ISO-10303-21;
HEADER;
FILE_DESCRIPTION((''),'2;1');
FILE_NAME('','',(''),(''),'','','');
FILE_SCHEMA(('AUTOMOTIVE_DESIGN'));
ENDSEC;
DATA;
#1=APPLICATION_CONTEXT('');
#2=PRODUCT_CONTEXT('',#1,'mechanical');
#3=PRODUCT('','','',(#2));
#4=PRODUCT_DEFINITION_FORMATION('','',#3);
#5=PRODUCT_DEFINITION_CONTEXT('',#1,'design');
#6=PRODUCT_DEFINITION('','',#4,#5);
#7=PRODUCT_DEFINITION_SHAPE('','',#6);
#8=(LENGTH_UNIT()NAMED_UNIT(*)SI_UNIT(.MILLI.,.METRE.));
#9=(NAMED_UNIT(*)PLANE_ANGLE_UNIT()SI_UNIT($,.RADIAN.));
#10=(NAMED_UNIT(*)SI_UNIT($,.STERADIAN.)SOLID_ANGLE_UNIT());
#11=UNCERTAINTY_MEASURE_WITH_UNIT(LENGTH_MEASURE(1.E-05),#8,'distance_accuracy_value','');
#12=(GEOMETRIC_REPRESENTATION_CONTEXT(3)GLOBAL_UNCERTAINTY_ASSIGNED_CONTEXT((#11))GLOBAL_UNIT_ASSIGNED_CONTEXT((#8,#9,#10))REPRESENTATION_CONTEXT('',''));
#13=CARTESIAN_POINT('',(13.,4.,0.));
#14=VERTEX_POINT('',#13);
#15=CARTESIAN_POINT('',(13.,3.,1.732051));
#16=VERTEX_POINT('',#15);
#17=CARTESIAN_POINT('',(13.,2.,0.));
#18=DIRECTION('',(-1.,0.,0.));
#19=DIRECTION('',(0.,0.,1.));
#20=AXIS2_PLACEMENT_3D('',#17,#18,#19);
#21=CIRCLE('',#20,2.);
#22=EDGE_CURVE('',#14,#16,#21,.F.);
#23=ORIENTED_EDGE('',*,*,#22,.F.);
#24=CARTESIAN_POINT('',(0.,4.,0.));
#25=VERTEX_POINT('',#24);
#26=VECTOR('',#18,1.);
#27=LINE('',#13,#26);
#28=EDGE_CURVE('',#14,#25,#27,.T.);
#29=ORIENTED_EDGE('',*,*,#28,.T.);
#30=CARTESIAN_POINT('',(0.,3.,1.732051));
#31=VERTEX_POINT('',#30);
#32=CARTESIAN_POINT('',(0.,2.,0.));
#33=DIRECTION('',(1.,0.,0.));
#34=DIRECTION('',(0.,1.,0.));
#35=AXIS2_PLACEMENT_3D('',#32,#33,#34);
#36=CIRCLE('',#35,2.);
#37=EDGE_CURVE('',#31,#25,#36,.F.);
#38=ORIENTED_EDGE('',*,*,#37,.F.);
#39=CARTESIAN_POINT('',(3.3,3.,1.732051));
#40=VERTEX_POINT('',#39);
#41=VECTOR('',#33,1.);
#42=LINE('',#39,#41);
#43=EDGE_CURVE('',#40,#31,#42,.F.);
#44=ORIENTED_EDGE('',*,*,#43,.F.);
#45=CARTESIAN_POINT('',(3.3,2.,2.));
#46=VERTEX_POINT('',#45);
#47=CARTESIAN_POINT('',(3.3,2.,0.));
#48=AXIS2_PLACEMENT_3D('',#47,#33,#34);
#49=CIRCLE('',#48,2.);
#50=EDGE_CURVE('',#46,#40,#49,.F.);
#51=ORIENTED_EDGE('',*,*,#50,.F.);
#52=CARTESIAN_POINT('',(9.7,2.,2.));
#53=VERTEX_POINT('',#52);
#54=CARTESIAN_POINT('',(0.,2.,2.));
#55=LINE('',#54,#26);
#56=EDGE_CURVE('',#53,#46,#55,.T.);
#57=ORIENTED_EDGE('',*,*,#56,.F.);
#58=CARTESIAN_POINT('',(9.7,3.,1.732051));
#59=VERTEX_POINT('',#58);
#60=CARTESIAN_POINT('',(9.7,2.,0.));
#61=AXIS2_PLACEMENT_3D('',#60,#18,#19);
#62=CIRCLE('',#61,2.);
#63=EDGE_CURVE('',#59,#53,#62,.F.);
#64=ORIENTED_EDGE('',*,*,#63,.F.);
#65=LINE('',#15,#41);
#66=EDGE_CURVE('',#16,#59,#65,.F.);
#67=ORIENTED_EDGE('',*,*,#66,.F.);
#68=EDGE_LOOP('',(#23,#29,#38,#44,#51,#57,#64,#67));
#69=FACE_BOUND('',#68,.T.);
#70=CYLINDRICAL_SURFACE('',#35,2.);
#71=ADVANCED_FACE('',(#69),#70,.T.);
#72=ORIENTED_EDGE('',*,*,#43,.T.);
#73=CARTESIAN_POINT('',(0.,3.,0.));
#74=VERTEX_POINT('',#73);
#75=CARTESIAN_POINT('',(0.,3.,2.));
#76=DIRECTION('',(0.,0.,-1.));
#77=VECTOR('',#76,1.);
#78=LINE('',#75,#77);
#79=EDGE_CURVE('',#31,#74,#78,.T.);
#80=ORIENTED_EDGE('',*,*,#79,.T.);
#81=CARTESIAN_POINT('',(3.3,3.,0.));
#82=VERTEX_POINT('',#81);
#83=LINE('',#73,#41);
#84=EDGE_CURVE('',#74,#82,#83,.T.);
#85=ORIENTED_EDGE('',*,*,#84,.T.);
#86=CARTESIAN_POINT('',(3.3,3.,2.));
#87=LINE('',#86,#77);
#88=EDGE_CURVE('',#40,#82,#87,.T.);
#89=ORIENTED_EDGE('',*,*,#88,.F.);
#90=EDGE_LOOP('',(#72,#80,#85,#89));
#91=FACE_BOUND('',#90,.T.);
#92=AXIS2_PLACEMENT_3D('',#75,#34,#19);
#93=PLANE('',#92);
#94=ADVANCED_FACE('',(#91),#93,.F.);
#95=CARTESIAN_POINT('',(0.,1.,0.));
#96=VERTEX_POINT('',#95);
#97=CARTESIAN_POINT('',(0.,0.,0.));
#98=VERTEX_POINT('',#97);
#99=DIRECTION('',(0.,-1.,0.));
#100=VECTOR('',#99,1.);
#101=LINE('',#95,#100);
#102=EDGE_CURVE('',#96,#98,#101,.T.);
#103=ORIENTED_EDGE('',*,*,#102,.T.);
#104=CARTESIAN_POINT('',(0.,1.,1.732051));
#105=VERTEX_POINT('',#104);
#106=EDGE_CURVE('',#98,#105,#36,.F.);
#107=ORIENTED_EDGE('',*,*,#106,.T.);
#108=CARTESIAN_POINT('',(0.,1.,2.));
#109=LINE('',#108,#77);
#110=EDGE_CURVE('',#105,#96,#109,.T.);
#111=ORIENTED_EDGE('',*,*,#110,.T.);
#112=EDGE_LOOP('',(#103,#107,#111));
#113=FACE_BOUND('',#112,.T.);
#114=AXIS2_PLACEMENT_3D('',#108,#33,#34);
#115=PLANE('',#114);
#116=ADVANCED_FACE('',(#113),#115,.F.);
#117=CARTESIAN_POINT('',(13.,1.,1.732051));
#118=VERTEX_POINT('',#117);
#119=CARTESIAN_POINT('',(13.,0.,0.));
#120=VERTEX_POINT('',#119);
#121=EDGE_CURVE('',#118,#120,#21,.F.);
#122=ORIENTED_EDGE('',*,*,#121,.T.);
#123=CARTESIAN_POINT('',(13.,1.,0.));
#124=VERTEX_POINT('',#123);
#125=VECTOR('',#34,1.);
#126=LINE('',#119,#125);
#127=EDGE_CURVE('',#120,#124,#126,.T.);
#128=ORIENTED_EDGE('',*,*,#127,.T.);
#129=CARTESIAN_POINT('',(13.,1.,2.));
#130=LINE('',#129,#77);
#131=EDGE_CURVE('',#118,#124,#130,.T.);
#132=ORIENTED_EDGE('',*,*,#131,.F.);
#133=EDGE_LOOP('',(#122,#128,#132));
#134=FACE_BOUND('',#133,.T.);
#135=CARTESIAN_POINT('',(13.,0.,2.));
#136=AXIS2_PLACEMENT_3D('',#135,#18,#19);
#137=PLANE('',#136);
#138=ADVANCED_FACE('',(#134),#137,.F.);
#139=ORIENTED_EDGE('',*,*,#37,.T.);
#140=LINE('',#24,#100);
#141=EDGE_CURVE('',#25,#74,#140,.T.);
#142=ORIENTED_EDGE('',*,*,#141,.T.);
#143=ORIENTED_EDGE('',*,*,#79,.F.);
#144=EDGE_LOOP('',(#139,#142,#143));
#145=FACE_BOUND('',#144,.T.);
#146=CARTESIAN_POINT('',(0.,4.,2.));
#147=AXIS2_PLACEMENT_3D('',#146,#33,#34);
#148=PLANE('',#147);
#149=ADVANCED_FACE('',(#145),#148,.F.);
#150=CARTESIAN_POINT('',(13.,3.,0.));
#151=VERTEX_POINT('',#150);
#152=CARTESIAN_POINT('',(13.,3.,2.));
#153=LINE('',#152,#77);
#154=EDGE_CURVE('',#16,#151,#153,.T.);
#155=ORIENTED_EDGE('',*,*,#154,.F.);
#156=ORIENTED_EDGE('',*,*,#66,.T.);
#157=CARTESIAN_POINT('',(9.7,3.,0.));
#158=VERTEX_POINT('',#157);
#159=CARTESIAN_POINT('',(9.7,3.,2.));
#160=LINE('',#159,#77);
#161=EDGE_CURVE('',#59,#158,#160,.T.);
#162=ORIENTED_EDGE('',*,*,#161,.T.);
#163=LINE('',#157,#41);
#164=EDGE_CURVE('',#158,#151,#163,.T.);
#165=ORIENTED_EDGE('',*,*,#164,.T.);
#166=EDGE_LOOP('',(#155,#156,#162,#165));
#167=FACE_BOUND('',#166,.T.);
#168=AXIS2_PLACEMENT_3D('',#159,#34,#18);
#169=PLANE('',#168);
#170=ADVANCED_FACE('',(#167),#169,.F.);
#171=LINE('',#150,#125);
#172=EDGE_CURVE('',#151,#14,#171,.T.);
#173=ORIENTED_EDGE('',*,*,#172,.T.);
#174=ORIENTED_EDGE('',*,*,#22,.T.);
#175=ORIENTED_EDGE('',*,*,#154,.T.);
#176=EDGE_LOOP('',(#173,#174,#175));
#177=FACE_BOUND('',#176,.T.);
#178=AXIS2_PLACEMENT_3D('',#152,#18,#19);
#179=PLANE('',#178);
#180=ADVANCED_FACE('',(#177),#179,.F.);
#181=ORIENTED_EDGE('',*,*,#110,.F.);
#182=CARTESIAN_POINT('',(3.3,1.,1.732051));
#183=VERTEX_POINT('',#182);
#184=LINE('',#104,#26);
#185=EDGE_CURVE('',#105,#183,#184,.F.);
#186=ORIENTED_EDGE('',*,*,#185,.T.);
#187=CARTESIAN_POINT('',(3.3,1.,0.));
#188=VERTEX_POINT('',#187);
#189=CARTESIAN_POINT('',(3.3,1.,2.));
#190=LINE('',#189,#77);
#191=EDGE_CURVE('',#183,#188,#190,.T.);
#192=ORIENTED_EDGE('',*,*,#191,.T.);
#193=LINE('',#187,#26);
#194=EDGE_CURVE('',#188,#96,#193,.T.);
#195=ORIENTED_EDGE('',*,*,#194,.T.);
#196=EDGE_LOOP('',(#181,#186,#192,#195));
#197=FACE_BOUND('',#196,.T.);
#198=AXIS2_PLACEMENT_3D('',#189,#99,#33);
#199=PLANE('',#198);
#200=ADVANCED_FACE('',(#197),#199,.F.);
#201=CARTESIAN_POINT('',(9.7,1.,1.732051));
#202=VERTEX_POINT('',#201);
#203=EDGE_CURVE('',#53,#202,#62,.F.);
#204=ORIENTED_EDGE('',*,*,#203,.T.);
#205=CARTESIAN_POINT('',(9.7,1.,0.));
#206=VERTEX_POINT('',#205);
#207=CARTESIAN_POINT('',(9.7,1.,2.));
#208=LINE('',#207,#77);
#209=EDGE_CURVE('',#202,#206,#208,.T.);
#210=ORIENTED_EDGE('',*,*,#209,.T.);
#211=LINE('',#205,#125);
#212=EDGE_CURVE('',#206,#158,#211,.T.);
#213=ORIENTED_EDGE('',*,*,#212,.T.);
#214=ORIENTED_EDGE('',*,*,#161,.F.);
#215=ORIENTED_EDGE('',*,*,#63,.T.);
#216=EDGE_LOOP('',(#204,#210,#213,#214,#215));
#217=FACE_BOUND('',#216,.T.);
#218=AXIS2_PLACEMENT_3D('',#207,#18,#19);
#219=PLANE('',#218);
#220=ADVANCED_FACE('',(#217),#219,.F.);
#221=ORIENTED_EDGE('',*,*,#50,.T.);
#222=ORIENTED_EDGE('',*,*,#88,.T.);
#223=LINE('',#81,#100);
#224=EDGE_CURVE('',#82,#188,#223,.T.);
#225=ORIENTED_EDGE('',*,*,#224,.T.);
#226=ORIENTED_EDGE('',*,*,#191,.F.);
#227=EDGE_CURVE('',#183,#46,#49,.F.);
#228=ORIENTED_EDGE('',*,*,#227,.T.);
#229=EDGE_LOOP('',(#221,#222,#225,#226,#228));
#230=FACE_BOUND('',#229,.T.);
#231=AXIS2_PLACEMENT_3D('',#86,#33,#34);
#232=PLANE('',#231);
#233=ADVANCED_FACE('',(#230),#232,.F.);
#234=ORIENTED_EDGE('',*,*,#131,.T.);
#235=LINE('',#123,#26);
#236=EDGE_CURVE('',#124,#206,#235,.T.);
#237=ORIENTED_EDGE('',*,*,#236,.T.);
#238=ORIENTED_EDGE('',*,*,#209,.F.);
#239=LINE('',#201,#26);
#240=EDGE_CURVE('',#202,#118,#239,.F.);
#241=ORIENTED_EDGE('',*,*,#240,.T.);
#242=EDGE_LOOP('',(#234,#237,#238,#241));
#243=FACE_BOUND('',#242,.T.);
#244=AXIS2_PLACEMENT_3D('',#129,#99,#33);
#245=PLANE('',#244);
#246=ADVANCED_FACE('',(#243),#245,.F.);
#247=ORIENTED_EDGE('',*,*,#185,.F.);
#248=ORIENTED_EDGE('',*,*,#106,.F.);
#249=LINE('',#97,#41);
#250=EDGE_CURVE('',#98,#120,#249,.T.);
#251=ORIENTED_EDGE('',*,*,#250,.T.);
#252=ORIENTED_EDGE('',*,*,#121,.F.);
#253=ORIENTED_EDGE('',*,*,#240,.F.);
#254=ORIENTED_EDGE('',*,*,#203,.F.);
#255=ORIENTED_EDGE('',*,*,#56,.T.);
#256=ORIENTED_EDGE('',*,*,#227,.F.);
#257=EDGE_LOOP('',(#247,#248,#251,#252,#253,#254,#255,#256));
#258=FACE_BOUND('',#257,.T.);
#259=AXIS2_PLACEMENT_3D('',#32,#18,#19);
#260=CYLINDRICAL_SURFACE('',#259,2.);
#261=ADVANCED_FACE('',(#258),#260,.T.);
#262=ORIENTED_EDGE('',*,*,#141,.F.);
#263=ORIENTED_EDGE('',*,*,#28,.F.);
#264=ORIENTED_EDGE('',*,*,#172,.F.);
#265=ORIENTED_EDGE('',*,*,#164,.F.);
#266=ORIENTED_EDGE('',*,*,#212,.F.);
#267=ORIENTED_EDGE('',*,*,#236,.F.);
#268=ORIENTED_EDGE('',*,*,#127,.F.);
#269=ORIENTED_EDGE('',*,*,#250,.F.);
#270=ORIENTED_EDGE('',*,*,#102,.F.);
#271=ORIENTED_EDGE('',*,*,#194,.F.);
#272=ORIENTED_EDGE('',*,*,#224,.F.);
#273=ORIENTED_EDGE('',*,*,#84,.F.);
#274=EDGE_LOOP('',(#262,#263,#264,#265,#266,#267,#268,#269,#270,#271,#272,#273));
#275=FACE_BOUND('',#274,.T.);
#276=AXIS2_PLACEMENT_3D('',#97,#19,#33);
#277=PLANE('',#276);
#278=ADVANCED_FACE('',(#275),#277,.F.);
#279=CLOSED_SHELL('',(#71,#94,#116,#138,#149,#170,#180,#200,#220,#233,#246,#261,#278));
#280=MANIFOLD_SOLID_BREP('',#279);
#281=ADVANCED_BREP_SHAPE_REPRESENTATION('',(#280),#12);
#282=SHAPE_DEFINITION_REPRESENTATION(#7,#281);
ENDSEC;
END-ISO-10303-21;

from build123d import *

# Parameters (mm, degrees)
BOSS_EXTRUDE1_DEPTH = 2
FILLET1_R           = 2


with BuildPart() as part:
    # Sketch1 → Boss-Extrude1 (new body)
    with BuildSketch(Plane.XY):
        Polygon((0, 0), (13, 0), (13, 1), (9.7, 1), (9.7, 3), (13, 3), (13, 4), (0, 4), (0, 3), (3.3, 3), (3.3, 1), (0, 1), align=None)
    extrude(amount=BOSS_EXTRUDE1_DEPTH)

    # Fillet1
    fillet1_edges = [part.edges().sort_by_distance(p)[0] for p in [
        (6.5, 0, 2),
        (6.5, 4, 2),
    ]]
    fillet(fillet1_edges, radius=FILLET1_R - 0.0001)  # a hair under: the kernel refuses the full size


solid = part.part
